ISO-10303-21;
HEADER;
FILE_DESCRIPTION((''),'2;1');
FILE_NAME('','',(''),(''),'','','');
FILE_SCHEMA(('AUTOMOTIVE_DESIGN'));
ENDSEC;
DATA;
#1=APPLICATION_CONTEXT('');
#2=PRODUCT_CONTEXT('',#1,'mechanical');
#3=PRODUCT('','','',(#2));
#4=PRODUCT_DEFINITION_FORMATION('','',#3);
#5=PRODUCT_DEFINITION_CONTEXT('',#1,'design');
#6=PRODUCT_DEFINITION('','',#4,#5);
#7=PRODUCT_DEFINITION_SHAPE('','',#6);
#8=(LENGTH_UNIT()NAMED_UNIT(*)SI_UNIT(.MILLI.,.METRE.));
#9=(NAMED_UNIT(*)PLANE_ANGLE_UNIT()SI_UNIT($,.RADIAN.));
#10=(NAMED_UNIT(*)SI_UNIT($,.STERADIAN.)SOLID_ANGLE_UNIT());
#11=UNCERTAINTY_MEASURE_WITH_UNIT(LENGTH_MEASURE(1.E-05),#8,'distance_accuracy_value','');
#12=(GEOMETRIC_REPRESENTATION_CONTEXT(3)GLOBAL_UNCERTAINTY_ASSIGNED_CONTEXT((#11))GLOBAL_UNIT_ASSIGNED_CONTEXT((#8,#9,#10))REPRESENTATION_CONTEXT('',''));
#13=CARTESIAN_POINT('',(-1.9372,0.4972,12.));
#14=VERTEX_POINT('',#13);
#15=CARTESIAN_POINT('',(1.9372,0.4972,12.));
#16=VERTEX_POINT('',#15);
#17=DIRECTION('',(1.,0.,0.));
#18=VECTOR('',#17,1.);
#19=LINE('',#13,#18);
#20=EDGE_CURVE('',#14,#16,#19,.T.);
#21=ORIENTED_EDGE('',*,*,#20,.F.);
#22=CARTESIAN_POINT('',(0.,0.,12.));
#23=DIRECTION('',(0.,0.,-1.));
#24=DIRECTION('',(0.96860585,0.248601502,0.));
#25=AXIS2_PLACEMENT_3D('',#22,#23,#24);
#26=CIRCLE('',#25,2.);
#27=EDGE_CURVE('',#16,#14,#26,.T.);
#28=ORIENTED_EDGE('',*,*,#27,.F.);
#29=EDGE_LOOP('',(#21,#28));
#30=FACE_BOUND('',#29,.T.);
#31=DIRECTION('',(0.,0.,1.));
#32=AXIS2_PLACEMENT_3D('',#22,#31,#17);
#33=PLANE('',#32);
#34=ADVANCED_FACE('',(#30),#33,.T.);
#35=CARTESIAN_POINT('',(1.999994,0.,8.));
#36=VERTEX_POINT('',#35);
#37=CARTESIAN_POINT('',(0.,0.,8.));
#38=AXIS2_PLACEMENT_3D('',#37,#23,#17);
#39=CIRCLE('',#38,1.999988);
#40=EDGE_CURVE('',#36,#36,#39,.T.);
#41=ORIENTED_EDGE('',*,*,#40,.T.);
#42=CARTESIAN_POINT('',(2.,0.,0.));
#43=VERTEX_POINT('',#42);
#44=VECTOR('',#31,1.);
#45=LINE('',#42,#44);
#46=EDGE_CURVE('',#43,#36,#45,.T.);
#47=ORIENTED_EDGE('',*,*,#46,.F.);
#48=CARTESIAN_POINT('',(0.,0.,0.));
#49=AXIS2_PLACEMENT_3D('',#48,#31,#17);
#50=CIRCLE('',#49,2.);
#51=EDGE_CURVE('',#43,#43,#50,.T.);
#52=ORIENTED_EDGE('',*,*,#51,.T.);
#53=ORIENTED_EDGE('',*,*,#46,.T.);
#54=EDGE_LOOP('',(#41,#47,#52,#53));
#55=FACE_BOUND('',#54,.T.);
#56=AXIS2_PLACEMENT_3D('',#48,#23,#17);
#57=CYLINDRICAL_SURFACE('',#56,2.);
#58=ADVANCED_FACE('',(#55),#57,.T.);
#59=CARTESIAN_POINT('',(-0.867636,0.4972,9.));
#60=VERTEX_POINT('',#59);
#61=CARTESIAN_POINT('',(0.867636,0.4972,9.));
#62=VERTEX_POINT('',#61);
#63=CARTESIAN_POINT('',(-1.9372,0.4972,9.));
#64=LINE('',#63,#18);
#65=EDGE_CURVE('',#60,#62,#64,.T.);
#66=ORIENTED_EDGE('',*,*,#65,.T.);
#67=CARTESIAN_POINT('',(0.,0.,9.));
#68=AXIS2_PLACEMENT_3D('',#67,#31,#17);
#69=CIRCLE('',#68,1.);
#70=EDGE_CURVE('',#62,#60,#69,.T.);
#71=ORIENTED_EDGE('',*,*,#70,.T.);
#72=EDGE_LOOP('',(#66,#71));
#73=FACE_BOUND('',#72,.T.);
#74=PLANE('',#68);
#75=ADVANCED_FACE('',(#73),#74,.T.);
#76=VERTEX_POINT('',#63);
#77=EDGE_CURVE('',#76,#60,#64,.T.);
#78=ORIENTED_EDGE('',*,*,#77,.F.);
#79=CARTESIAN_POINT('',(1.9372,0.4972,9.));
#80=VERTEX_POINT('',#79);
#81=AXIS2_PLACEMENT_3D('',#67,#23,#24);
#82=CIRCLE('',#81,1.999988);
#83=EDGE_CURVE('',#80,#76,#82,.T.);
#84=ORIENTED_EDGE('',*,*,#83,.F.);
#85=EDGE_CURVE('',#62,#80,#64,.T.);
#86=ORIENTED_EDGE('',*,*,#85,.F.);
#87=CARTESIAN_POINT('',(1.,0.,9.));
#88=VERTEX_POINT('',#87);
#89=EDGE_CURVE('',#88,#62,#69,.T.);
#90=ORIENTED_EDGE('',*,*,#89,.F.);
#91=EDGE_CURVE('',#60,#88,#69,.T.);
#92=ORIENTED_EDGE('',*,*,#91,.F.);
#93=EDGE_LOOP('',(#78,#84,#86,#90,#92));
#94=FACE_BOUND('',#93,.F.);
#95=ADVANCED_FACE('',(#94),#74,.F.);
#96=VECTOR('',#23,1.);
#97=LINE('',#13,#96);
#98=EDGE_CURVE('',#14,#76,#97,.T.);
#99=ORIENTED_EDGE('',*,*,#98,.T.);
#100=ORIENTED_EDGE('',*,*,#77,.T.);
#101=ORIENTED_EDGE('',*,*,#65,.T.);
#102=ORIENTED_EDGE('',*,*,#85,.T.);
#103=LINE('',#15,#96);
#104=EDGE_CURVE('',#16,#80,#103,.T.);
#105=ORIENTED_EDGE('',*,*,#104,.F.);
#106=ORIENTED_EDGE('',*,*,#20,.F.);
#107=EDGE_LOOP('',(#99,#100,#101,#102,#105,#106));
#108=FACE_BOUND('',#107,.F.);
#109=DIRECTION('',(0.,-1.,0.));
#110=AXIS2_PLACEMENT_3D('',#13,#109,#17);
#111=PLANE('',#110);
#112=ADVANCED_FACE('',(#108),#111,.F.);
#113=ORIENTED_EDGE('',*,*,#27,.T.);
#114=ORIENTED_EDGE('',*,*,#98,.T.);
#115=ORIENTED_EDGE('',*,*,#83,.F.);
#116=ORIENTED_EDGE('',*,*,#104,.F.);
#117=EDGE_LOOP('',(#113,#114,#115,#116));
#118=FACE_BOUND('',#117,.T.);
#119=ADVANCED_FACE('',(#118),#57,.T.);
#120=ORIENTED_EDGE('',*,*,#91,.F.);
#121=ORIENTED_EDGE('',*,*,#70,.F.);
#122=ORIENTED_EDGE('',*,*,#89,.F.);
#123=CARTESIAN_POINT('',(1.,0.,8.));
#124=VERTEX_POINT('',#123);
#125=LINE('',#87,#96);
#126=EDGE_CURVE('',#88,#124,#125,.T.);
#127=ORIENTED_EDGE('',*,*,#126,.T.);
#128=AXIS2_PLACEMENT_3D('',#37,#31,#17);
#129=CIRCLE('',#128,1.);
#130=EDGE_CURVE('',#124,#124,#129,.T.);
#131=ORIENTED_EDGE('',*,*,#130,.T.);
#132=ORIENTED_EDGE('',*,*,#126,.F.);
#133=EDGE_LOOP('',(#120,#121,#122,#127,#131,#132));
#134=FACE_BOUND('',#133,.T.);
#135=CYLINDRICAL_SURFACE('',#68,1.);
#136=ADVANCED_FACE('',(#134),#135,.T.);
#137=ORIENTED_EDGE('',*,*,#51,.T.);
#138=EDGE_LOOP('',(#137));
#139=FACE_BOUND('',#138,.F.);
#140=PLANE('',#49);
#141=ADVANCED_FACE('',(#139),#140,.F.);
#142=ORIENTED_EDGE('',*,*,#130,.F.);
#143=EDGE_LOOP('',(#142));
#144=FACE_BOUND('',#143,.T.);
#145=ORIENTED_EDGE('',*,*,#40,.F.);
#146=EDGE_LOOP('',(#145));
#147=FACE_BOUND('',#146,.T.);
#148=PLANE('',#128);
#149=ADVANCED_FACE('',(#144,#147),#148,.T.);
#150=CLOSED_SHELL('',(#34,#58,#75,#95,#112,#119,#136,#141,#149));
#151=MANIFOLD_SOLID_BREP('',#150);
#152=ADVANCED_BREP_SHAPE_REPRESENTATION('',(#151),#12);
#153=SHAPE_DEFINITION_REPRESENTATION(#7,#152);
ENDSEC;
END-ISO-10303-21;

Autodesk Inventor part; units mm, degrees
ref_plane "YZ Plane" through (0, 0, 0) normal (1, 0, 0) x (0, 1, 0)
ref_plane "XZ Plane" through (0, 0, 0) normal (0, 1, 0) x (-1, 0, 0)
sketch "Skizze1" plane through (0, 0, 0) normal (0, 0, 1) x (1, 0, 0)
  circle A0 centre (0, 0) radius 2
  dimension "d0" = 4
extrude "Extrusion1" add sketch "Skizze1" along normal blind 12
sketch "Skizze2" plane through (0, 0, 12) normal (0, 0, 1) x (1, 0, 0)
  circle A0 centre (0, 0) radius 2 projected
  line L0 (-1.9372, 0.4972) -> (1.9372, 0.4972)
extrude "Extrusion2" cut sketch "Skizze2" against normal blind 3 contours L0 A0 picked at (-0.0798, 0.9933)
ref_plane "Arbeitsebene1" through (0, 0, 9) normal (0, 0, 1) x (1, 0, 0)
sketch "Skizze3" plane through (0, 0, 9) normal (0, 0, 1) x (1, 0, 0)
  circle A0 centre (0, 0) radius 1
  arc A1 (1.9372, 0.4972) -> (-1.9372, 0.4972) centre (0, 0) ccw projected
  arc A2 (-1.9372, 0.4972) -> (1.9372, 0.4972) centre (0, 0) ccw projected
  dimension "d6" = 2
extrude "Extrusion3" cut sketch "Skizze3" against normal blind 1
properties part number "motor" material "Aluminium 6061"
